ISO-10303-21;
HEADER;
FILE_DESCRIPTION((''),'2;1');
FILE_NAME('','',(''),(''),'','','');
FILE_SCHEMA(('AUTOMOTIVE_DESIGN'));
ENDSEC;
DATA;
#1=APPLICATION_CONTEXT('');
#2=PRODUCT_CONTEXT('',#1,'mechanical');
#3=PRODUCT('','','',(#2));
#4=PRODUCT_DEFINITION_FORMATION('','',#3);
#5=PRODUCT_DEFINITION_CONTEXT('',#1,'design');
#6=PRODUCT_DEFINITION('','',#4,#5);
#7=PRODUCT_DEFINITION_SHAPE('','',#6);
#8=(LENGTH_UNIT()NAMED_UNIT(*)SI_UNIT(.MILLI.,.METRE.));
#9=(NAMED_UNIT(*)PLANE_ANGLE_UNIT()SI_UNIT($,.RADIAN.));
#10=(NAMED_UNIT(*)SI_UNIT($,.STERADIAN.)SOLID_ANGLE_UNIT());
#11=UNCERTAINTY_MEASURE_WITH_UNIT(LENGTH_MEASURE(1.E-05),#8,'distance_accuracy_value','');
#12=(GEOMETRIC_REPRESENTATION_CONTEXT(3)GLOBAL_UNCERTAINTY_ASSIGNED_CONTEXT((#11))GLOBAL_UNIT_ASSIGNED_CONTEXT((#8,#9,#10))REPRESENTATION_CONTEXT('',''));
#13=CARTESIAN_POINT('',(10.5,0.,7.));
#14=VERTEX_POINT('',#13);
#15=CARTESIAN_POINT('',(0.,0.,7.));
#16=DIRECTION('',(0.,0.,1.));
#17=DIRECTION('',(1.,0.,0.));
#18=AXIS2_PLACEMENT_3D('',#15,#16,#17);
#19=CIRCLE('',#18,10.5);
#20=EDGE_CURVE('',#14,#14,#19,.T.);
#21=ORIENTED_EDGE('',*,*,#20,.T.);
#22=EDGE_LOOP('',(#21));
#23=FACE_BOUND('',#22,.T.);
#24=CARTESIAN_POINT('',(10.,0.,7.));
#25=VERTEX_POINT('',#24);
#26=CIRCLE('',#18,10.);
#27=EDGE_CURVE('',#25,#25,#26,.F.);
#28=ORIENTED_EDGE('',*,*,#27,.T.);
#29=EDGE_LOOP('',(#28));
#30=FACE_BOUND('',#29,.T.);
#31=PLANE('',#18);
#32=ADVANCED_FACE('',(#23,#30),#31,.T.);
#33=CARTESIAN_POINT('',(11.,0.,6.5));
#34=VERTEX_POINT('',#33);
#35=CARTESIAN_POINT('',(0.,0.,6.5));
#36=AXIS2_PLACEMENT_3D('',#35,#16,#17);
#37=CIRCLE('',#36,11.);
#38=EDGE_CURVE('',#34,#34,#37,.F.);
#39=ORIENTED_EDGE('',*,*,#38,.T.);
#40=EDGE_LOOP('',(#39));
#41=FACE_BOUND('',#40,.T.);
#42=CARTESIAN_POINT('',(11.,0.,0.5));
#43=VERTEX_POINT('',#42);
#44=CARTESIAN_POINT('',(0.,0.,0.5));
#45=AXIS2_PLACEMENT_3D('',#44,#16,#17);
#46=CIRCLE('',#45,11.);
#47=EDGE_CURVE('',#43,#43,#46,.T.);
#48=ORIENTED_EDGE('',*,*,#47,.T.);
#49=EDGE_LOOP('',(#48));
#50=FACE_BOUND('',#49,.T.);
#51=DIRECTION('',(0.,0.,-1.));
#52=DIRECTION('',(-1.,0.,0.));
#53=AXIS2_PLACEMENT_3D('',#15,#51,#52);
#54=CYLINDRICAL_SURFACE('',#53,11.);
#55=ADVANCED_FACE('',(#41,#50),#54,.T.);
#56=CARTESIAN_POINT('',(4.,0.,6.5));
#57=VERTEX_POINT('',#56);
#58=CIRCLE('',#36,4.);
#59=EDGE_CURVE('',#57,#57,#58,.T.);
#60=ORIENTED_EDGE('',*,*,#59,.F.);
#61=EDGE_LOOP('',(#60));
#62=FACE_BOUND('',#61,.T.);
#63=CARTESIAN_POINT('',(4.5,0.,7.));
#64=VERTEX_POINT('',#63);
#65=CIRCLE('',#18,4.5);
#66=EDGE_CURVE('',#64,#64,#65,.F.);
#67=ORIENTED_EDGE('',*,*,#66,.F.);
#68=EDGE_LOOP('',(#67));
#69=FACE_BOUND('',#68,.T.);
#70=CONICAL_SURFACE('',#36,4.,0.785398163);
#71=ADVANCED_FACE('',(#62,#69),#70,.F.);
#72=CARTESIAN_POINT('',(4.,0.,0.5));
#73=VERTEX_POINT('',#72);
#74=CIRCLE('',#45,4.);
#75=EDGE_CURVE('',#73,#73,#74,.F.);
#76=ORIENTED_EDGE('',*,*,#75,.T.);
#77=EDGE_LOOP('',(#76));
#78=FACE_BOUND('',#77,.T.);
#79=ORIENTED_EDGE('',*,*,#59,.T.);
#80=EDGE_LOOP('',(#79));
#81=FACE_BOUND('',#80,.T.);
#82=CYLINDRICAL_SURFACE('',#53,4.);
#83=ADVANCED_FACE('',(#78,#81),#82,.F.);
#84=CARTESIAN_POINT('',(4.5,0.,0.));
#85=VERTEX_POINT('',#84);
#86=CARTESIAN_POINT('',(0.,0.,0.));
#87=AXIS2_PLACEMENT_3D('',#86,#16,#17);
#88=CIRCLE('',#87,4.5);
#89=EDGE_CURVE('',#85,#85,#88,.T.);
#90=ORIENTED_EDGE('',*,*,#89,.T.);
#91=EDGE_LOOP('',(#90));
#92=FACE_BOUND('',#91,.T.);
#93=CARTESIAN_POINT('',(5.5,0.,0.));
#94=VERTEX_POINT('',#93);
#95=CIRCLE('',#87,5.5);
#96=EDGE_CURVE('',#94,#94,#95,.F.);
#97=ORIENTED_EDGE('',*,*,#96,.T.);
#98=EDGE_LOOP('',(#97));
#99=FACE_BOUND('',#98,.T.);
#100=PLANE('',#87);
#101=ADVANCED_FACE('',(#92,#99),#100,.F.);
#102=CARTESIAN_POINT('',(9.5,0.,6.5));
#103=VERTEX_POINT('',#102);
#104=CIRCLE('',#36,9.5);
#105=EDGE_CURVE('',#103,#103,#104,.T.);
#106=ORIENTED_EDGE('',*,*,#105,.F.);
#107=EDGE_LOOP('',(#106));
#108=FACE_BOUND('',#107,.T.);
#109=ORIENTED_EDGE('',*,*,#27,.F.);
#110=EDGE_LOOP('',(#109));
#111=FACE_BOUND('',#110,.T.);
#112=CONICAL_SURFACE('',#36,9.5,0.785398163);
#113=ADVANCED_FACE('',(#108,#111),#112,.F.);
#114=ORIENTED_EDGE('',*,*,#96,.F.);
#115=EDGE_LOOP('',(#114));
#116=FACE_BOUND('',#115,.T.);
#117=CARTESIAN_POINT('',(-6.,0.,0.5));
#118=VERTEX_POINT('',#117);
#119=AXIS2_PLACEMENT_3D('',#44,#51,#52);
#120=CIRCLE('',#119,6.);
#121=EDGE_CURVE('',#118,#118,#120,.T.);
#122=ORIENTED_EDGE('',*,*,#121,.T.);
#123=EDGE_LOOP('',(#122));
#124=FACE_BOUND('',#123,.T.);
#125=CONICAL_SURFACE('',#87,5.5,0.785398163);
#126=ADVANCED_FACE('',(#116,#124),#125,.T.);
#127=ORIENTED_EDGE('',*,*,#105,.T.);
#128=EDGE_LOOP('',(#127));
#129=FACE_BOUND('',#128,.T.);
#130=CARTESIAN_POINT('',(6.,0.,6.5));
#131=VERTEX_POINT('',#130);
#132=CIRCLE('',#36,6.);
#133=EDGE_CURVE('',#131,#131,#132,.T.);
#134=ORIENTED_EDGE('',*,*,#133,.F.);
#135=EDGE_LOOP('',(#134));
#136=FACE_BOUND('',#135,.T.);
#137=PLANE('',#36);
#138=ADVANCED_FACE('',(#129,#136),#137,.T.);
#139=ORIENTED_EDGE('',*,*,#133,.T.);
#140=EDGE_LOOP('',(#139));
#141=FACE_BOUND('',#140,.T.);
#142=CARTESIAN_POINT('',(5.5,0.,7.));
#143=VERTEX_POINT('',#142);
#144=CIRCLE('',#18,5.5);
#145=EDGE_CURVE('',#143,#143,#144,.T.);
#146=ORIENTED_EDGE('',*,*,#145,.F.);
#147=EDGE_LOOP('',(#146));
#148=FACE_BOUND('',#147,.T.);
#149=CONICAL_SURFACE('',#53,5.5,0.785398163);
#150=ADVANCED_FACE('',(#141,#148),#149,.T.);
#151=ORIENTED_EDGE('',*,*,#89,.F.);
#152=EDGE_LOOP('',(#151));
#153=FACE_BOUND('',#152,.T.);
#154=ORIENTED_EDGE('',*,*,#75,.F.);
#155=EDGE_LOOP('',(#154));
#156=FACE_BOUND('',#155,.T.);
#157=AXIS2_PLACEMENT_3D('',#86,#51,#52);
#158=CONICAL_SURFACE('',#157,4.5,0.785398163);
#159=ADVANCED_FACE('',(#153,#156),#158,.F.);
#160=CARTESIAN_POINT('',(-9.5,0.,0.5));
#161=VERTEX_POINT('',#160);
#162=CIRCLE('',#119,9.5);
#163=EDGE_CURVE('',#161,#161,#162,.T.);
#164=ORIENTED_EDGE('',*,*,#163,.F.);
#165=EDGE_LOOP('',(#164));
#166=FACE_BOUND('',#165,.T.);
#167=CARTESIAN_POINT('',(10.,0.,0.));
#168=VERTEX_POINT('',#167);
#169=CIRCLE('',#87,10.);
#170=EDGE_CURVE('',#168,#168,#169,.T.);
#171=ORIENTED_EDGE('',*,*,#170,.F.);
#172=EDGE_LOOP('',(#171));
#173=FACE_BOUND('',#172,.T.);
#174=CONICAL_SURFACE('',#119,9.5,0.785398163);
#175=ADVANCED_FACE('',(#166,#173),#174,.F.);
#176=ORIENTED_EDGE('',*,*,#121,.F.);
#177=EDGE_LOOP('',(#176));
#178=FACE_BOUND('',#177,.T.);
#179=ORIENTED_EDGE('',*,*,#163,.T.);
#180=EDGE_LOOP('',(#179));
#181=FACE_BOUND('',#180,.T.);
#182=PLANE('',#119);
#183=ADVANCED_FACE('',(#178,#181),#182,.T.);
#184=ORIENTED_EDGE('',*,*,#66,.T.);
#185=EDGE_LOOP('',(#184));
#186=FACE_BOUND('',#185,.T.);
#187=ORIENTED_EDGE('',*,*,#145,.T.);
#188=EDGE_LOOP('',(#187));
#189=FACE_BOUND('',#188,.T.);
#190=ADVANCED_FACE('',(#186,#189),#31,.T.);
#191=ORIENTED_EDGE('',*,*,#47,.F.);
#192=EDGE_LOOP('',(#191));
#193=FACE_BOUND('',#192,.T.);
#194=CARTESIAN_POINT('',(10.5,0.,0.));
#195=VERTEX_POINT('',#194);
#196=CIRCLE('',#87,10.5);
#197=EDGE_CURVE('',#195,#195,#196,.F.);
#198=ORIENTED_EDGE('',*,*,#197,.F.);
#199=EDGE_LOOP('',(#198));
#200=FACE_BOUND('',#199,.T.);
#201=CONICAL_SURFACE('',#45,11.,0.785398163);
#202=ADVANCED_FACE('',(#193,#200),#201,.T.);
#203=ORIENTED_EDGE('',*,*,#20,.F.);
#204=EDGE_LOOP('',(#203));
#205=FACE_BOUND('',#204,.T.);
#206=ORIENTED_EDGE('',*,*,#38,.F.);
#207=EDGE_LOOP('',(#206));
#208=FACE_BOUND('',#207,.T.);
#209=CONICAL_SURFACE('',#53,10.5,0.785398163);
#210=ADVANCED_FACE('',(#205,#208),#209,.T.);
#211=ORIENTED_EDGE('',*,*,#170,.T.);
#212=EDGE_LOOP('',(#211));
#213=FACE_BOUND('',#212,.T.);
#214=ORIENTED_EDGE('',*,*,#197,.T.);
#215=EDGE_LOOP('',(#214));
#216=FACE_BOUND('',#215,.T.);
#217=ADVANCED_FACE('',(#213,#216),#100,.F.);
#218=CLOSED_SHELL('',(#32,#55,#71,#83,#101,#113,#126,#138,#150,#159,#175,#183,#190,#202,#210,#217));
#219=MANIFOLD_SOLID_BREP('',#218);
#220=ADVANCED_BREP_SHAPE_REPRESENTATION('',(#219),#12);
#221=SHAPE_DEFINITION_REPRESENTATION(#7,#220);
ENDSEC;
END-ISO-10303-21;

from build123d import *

# Parameters (mm, degrees)
ESQUISSE1_R             = 11
ESQUISSE1_R_2           = 4
BASE_EXTRUSION_DEPTH    = 7
ESQUISSE2_R             = 9.5
ESQUISSE2_R_2           = 6
ENL_V_MAT_EXTRU_1_DEPTH = 0.5
ENL_V_START             = -0.5
ESQUISSE3_R             = 9.5
ESQUISSE3_R_2           = 6
ENL_V_MAT_EXTRU_2_DEPTH = 0.5
CHANFREIN1_SIZE         = 0.5


with BuildPart() as part:
    # Esquisse1 → Base-Extrusion (new body)
    with BuildSketch(Plane.XY):
        Circle(ESQUISSE1_R)
        Circle(ESQUISSE1_R_2, mode=Mode.SUBTRACT)
    extrude(amount=BASE_EXTRUSION_DEPTH)

    # Esquisse2 → Enlèv. mat.-Extru.1 (cut)
    with BuildSketch(Plane.XY.offset(7)):
        Circle(ESQUISSE2_R)
        Circle(ESQUISSE2_R_2, mode=Mode.SUBTRACT)
    extrude(amount=-ENL_V_MAT_EXTRU_1_DEPTH, mode=Mode.SUBTRACT)

    # Esquisse3 → Enlèv. mat.-Extru.2 (cut)
    with BuildSketch(Plane(origin=(0, 0, 0), x_dir=(-1, 0, 0), z_dir=(0, 0, -1)).offset(ENL_V_START)):
        with Locations(Location((0, 0, 0), (0, 0, 180))):
            Circle(ESQUISSE3_R)
        with Locations(Location((0, 0, 0), (0, 0, 180))):
            Circle(ESQUISSE3_R_2, mode=Mode.SUBTRACT)
    extrude(amount=ENL_V_MAT_EXTRU_2_DEPTH, mode=Mode.SUBTRACT)

    # Chanfrein1
    chanfrein1_edges = [part.edges().sort_by_distance(p)[0] for p in [
        (-9.5, 0, 7),
        (-6, 0, 7),
        (-9.5, 0, 0),
        (-6, 0, 0),
        (-11, 0, 0),
        (-11, 0, 7),
        (-4, 0, 0),
        (-4, 0, 7),
    ]]
    chamfer(chanfrein1_edges, length=CHANFREIN1_SIZE - 0.0001)  # a hair under: the kernel refuses the full size


solid = part.part
